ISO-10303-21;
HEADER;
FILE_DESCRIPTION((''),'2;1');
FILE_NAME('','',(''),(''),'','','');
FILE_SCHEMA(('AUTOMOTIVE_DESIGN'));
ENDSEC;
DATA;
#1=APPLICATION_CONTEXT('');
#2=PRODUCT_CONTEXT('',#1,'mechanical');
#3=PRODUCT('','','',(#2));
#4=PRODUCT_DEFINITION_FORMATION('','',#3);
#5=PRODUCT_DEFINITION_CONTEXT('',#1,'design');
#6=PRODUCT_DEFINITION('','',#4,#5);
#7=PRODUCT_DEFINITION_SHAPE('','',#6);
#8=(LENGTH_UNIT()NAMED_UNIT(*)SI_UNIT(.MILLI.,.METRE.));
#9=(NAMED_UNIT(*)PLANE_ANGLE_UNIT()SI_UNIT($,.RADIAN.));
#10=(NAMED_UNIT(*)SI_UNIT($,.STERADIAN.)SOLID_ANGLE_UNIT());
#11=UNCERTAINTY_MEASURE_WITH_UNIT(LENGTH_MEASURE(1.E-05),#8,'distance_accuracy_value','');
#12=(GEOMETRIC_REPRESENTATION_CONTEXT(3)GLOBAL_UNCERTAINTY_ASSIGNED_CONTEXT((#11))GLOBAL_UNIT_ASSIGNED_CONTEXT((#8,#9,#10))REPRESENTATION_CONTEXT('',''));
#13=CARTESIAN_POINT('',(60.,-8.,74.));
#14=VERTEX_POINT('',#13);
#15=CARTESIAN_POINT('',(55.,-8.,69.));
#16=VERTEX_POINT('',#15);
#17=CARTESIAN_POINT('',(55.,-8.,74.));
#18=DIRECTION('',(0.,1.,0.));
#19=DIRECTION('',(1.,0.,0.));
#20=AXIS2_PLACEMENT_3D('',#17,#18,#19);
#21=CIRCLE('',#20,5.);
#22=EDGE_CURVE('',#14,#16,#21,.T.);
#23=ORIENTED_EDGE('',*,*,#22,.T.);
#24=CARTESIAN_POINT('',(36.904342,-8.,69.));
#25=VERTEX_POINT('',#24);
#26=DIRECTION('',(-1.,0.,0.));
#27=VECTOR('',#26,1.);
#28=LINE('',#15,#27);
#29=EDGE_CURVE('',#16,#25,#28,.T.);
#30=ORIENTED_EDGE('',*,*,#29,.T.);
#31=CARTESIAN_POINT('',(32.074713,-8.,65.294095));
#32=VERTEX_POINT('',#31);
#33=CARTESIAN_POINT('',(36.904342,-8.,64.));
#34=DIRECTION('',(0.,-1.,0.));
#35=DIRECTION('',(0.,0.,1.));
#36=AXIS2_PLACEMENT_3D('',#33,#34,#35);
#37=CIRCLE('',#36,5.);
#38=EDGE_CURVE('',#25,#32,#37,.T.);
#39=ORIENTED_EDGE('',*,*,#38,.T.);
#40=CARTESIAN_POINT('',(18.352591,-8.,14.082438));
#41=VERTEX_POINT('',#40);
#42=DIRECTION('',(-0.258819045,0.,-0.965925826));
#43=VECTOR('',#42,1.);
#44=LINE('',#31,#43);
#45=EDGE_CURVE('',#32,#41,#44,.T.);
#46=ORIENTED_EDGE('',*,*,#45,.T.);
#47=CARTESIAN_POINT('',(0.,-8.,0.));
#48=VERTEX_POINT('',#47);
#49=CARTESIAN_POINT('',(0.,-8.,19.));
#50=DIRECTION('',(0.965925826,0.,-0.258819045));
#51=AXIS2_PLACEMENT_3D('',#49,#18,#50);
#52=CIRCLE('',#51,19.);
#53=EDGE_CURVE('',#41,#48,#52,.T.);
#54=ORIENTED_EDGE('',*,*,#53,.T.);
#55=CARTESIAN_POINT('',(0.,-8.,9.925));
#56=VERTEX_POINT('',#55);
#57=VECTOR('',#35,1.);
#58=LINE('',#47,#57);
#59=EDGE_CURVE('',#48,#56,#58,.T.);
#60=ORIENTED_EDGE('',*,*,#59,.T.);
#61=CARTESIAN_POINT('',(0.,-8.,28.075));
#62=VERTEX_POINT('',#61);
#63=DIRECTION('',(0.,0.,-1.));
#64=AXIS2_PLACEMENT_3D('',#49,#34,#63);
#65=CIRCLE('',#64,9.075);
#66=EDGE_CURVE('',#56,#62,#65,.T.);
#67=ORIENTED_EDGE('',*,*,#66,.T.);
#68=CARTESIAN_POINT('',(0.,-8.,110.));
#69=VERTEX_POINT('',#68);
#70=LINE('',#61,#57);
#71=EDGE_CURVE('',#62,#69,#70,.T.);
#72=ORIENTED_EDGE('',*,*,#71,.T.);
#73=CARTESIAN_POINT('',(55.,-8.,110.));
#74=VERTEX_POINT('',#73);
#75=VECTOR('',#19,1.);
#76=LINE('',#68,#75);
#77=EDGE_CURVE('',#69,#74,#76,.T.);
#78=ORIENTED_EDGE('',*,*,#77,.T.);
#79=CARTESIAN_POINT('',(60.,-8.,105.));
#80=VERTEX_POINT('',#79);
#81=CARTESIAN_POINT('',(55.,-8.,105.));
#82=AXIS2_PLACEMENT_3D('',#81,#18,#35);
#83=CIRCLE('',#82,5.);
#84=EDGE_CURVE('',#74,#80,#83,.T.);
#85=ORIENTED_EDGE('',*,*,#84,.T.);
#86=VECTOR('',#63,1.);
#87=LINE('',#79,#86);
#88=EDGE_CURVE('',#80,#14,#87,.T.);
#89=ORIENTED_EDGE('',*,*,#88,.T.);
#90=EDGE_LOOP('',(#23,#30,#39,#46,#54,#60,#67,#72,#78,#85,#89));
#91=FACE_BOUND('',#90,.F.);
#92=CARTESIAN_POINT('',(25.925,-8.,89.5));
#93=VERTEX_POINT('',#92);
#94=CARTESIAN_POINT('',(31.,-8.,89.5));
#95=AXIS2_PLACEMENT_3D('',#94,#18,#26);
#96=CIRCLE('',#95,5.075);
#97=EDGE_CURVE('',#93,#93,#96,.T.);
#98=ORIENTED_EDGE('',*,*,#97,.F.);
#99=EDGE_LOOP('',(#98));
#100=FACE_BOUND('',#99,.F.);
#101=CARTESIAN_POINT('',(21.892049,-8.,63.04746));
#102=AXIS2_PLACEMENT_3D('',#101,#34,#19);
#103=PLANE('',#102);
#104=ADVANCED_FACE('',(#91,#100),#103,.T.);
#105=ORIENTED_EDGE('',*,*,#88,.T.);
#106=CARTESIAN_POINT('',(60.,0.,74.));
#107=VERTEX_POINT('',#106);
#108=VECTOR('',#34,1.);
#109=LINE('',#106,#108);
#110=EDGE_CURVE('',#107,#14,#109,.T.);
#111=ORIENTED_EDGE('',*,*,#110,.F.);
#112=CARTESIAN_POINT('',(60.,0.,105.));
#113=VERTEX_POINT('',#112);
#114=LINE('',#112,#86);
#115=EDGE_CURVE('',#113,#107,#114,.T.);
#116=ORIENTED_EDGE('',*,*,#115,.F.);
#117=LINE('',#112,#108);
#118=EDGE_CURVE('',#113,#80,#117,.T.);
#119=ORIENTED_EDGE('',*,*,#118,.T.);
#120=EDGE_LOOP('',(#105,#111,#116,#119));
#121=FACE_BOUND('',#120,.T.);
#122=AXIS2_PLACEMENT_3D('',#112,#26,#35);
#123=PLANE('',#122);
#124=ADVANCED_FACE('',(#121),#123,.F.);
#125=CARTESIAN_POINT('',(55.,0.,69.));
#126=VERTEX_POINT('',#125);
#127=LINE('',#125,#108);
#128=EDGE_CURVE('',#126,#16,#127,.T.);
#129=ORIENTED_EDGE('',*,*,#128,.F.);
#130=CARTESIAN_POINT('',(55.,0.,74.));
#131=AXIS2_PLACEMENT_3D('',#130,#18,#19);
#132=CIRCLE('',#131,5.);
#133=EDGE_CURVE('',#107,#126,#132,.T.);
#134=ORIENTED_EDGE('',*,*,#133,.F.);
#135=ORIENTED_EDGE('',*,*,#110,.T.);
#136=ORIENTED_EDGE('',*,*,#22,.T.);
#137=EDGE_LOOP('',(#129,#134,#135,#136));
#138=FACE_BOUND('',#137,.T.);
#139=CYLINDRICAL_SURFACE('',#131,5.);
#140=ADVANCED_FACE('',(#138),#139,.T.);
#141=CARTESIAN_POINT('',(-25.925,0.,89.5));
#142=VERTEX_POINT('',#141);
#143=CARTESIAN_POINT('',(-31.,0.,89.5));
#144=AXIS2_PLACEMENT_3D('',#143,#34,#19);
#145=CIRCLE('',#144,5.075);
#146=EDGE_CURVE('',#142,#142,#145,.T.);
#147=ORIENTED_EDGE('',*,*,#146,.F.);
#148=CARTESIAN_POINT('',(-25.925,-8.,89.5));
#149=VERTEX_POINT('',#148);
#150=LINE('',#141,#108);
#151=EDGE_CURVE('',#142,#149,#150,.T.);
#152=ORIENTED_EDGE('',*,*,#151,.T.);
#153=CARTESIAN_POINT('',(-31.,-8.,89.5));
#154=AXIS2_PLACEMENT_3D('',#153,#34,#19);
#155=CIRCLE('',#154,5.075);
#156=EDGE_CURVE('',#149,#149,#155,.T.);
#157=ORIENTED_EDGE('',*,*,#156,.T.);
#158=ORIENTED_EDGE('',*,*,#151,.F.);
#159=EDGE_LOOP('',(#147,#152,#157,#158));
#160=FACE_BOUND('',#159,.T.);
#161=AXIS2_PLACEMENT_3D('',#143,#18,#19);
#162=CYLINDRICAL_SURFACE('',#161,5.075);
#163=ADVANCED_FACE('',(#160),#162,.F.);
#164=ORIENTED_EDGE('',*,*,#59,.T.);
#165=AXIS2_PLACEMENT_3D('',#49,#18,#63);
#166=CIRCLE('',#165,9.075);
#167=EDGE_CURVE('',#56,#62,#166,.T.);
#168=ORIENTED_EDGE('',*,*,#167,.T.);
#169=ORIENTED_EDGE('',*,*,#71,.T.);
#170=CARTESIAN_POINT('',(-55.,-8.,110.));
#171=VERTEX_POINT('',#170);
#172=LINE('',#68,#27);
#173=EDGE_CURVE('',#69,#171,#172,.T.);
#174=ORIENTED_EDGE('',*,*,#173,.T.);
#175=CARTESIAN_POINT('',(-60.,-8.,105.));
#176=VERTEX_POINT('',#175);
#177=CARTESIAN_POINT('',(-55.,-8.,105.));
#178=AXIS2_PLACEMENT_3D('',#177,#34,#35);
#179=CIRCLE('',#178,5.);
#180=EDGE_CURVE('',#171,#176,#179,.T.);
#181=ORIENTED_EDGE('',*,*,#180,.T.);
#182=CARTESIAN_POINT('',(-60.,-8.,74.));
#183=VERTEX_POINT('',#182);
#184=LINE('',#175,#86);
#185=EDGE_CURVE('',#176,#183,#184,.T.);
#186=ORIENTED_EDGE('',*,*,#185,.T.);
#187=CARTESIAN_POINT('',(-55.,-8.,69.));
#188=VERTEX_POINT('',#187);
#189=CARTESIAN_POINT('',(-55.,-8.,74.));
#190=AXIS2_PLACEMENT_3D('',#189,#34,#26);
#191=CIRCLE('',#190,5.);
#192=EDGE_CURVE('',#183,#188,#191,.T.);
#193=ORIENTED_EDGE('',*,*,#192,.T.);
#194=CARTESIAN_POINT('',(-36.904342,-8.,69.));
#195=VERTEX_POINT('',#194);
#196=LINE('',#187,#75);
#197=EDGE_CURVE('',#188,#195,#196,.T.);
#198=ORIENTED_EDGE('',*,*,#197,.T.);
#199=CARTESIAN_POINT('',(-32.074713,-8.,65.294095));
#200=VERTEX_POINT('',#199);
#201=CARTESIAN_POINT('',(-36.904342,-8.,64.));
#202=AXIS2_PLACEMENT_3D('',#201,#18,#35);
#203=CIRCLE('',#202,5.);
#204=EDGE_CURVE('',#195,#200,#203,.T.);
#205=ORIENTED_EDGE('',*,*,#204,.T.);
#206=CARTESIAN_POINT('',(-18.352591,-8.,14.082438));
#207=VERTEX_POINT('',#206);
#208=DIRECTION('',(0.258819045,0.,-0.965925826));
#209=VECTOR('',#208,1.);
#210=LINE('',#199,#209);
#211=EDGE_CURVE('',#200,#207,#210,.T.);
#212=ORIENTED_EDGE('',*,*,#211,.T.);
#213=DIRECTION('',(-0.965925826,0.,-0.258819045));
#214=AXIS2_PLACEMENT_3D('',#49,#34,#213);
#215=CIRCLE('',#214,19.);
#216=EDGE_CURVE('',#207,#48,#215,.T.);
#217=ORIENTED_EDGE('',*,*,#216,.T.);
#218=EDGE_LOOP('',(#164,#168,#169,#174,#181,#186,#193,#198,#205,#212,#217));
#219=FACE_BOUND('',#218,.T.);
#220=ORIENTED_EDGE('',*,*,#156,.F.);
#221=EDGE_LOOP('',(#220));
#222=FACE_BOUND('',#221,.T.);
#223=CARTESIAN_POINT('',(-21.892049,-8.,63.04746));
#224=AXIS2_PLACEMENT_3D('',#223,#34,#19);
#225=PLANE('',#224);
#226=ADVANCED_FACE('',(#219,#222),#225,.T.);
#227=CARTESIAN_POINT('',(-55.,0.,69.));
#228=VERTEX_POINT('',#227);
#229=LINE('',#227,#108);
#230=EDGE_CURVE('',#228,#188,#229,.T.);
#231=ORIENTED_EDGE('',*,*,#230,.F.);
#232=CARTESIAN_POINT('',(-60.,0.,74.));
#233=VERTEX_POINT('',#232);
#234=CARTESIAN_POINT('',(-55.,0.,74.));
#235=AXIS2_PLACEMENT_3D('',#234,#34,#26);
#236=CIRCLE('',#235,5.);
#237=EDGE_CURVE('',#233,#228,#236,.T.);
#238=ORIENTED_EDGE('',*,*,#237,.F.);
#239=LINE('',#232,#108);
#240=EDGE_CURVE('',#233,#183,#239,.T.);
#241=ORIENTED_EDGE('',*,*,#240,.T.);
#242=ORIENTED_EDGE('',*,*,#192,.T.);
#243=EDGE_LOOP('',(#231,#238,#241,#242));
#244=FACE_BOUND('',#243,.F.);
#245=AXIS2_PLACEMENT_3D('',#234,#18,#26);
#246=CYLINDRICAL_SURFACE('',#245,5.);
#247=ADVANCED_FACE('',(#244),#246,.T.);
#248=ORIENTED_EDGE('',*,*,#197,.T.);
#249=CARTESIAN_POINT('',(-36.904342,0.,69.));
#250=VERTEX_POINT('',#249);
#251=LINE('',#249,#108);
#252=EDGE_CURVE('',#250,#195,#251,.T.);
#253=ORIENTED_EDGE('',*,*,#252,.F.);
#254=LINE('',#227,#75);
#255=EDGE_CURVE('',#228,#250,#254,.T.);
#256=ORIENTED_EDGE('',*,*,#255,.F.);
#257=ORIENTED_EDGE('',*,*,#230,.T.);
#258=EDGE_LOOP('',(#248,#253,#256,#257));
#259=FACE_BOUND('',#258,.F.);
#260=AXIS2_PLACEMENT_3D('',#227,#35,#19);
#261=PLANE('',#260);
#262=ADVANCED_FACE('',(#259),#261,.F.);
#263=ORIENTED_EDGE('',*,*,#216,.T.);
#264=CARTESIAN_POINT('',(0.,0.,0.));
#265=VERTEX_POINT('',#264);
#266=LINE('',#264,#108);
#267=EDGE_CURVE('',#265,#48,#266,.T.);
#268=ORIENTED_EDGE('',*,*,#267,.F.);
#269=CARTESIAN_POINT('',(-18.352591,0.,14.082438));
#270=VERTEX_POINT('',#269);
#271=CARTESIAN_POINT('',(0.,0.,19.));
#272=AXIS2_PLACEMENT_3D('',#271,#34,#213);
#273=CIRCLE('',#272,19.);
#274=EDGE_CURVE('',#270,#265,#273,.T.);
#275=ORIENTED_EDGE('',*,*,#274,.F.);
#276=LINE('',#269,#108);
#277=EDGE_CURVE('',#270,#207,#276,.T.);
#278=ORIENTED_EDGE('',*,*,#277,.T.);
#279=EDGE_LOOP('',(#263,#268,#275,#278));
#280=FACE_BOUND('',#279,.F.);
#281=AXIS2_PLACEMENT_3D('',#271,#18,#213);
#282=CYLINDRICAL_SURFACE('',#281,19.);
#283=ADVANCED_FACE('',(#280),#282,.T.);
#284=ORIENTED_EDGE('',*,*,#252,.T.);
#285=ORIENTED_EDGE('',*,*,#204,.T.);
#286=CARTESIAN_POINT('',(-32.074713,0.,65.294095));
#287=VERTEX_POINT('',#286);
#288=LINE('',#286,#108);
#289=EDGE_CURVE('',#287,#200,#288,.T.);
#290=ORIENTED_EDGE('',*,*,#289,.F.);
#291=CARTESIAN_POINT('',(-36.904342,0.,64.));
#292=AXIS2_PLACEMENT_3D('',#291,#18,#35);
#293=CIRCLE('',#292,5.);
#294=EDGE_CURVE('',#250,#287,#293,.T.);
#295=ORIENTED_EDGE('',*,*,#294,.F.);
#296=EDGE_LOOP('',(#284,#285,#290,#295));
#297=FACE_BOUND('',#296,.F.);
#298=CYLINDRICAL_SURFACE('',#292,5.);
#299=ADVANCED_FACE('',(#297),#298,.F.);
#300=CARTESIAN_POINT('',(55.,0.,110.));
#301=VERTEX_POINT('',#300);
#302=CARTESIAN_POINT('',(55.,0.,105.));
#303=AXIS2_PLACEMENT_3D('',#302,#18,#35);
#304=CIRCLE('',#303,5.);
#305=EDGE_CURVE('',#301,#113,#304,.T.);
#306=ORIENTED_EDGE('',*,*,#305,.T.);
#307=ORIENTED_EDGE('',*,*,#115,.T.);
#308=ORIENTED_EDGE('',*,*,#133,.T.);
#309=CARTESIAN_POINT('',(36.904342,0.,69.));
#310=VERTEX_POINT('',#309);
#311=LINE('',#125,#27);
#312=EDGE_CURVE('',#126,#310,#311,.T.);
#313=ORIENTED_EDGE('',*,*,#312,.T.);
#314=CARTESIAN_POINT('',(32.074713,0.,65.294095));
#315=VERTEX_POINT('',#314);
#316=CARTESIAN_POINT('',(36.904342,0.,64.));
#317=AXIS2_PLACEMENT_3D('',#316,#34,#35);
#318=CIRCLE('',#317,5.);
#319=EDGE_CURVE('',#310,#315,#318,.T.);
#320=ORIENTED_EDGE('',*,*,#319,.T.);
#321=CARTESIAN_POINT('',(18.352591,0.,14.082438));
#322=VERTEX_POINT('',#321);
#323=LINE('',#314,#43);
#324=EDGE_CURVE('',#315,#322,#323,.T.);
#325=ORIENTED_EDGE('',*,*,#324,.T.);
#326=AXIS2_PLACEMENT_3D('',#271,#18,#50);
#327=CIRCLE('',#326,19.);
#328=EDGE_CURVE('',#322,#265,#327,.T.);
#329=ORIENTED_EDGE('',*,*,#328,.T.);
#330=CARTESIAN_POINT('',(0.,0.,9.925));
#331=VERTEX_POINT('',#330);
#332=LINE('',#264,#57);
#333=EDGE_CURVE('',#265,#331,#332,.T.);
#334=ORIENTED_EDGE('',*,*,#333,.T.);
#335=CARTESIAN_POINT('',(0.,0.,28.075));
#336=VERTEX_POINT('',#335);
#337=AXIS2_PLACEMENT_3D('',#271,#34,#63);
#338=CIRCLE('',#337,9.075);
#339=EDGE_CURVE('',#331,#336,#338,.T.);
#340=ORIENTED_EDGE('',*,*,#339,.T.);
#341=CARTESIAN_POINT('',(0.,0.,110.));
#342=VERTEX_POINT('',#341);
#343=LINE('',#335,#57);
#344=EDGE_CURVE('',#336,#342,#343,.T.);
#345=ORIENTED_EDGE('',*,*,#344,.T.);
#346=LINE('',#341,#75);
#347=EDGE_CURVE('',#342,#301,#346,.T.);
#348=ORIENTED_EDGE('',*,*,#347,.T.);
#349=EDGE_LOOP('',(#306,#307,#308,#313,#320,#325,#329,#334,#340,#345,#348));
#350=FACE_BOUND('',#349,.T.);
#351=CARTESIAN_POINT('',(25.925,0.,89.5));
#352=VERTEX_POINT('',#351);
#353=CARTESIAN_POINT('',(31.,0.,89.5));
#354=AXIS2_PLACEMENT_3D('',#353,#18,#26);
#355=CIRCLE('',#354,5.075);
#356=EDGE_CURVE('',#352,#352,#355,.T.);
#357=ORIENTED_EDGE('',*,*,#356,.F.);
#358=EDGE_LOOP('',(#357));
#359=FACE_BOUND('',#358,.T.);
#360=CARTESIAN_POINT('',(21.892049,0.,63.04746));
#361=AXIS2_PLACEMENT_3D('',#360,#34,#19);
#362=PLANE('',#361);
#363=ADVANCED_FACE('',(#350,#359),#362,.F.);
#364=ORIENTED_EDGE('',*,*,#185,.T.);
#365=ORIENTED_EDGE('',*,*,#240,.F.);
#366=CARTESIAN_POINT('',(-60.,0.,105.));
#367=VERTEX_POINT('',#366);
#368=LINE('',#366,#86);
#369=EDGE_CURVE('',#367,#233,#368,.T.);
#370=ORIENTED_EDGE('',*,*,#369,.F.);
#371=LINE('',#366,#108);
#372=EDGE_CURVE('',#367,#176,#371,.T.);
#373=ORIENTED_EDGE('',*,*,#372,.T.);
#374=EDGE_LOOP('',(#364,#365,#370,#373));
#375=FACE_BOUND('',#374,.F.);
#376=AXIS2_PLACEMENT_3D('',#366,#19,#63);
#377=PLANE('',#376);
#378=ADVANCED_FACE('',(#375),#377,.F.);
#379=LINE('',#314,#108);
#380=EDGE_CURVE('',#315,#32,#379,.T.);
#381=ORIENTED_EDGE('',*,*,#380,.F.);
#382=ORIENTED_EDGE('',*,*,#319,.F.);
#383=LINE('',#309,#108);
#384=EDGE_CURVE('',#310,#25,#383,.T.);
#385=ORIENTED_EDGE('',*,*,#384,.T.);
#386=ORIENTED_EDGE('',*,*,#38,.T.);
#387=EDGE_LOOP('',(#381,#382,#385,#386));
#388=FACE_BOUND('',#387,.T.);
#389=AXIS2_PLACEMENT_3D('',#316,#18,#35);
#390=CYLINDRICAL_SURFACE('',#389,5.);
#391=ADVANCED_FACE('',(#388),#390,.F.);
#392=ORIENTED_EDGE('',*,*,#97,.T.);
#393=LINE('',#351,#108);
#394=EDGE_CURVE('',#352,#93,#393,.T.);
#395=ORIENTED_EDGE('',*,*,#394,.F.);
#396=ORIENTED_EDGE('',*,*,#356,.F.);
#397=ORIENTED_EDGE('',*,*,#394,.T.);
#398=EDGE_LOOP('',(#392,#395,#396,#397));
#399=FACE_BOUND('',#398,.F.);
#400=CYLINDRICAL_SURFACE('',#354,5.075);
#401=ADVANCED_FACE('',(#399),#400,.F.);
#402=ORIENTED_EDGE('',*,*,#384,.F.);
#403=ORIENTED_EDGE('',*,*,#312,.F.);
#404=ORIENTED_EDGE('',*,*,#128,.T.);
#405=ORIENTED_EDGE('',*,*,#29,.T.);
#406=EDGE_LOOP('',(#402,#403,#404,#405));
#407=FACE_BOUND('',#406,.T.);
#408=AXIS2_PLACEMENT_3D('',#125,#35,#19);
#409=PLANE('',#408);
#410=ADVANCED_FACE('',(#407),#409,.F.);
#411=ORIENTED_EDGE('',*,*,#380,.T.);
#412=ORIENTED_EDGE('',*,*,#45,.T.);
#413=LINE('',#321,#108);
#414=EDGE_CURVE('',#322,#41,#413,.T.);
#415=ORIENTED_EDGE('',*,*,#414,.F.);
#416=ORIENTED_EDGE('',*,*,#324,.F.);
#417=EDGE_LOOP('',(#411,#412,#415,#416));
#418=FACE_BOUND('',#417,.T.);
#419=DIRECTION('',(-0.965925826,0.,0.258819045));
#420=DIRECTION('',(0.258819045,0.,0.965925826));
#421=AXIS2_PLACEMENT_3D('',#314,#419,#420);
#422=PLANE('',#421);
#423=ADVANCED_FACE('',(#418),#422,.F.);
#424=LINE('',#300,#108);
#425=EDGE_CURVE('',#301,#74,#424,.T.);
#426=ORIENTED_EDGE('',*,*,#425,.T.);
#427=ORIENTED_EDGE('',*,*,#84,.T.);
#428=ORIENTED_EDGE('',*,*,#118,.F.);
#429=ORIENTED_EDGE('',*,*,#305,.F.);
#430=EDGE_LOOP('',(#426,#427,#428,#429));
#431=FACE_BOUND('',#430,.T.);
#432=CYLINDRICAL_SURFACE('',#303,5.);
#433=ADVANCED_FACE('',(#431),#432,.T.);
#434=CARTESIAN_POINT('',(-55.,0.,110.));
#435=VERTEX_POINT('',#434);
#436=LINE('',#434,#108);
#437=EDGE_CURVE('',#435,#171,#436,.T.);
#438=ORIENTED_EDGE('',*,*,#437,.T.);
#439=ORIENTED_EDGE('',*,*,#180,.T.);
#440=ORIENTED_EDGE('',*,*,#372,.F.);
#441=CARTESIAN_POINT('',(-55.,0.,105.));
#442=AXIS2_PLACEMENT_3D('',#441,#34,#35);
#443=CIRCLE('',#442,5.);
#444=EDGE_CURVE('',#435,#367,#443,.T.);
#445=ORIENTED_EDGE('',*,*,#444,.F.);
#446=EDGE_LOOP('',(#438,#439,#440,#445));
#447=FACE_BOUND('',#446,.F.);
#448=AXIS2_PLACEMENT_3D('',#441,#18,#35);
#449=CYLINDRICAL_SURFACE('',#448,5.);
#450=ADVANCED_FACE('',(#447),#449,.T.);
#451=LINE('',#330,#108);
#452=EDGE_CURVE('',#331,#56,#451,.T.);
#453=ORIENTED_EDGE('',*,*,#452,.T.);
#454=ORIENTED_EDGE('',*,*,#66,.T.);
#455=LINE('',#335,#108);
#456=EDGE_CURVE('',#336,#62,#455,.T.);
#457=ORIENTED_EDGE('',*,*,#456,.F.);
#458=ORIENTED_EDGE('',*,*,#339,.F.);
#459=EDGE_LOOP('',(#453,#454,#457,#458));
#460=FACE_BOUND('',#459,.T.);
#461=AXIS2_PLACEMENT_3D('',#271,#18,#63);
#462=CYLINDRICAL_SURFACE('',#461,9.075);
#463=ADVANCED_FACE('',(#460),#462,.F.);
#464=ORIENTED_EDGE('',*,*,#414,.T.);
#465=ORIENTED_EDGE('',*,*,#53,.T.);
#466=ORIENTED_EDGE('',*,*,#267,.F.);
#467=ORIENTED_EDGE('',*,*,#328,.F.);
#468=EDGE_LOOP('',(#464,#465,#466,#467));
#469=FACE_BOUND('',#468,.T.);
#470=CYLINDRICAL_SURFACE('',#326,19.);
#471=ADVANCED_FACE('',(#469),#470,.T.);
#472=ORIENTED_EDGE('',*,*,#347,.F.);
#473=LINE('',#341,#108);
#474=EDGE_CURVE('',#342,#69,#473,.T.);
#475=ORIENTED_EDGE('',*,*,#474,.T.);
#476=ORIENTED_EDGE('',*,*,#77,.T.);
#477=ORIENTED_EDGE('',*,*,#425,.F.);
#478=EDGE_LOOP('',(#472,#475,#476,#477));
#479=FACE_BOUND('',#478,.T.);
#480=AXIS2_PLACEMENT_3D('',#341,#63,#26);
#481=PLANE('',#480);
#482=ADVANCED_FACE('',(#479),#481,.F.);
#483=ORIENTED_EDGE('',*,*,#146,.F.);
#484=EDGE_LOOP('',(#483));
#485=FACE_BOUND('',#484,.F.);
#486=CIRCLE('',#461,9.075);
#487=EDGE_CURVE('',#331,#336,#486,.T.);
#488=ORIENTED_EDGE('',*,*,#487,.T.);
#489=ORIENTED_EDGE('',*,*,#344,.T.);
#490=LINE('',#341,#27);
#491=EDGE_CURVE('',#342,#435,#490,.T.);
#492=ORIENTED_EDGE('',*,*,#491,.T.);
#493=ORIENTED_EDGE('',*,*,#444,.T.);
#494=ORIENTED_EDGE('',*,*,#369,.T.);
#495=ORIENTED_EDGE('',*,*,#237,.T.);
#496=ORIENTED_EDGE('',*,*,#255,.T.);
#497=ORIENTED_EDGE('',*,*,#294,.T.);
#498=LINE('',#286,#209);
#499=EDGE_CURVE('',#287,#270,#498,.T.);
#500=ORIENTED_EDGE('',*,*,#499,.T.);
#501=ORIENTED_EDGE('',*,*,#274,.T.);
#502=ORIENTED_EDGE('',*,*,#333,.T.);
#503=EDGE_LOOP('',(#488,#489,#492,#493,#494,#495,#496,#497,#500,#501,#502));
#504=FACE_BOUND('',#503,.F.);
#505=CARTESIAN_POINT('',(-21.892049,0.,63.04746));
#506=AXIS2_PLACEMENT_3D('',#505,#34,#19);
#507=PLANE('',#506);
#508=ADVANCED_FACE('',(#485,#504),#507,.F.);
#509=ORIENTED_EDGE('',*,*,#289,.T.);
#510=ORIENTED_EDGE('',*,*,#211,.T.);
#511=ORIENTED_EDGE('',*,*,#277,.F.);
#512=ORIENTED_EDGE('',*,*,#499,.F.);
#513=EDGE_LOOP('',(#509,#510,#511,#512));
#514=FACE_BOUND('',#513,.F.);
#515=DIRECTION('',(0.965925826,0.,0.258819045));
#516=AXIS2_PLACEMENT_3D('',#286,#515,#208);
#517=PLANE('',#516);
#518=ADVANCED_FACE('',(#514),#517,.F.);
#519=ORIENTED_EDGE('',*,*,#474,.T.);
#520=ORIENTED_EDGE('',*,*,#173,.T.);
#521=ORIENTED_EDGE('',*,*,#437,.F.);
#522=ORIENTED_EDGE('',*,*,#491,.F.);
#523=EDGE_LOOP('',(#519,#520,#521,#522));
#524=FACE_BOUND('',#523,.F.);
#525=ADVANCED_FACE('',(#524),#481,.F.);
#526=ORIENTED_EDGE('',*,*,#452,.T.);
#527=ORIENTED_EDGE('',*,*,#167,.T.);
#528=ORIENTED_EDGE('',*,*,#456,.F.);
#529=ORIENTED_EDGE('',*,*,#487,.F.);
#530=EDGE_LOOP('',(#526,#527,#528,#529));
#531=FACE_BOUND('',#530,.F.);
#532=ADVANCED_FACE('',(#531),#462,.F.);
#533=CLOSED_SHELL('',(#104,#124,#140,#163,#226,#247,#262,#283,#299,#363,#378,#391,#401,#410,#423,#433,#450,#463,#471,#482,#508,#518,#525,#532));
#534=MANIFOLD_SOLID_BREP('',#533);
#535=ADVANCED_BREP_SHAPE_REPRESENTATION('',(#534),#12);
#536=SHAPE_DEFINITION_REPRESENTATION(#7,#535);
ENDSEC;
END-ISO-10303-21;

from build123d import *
from build123d import SkipClean  # not in build123d's __all__

# Parameters (mm, degrees)
F0_R     = 5.075
F1_DEPTH = 8


with BuildPart() as f1:
    # F0 (on Front) → F1 (new body)
    with BuildSketch(Plane.XZ):
        with BuildLine():
            ThreePointArc((-18.3525906995, 14.0824381431), (-11.5664671512, 3.9262865345), (0, 0))
            Line((0, 0), (0, 9.925))
            ThreePointArc((0, 9.925), (-9.075, 19), (0, 28.075))
            Line((0, 28.075), (0, 110))
            Line((0, 110), (-55, 110))
            ThreePointArc((-55, 110), (-58.5355339059, 108.5355339059), (-60, 105))
            Line((-60, 105), (-60, 74))
            ThreePointArc((-60, 74), (-58.5355339059, 70.4644660941), (-55, 69))
            Line((-55, 69), (-36.9043419892, 69))
            ThreePointArc((-36.9043419892, 69), (-33.8605348442, 67.9667667015), (-32.0747128578, 65.2940952255))
            Line((-32.0747128578, 65.2940952255), (-18.3525906995, 14.0824381431))
        make_face()
        with Locations((-31, 89.5)):
            Circle(F0_R, mode=Mode.SUBTRACT)
    extrude(amount=F1_DEPTH)

    # F2: F1 across face


with BuildPart() as f1_1:
    add(f1.part, clean=False)
    with SkipClean():  # cleaning this boolean's faces spoils the solid; the shape is the same uncleaned
        add(f1.part.mirror(Plane(origin=(0, -4, 69.0375), x_dir=(0, 1, 0), z_dir=(1, 0, 0))), clean=False)


solid = f1_1.part
